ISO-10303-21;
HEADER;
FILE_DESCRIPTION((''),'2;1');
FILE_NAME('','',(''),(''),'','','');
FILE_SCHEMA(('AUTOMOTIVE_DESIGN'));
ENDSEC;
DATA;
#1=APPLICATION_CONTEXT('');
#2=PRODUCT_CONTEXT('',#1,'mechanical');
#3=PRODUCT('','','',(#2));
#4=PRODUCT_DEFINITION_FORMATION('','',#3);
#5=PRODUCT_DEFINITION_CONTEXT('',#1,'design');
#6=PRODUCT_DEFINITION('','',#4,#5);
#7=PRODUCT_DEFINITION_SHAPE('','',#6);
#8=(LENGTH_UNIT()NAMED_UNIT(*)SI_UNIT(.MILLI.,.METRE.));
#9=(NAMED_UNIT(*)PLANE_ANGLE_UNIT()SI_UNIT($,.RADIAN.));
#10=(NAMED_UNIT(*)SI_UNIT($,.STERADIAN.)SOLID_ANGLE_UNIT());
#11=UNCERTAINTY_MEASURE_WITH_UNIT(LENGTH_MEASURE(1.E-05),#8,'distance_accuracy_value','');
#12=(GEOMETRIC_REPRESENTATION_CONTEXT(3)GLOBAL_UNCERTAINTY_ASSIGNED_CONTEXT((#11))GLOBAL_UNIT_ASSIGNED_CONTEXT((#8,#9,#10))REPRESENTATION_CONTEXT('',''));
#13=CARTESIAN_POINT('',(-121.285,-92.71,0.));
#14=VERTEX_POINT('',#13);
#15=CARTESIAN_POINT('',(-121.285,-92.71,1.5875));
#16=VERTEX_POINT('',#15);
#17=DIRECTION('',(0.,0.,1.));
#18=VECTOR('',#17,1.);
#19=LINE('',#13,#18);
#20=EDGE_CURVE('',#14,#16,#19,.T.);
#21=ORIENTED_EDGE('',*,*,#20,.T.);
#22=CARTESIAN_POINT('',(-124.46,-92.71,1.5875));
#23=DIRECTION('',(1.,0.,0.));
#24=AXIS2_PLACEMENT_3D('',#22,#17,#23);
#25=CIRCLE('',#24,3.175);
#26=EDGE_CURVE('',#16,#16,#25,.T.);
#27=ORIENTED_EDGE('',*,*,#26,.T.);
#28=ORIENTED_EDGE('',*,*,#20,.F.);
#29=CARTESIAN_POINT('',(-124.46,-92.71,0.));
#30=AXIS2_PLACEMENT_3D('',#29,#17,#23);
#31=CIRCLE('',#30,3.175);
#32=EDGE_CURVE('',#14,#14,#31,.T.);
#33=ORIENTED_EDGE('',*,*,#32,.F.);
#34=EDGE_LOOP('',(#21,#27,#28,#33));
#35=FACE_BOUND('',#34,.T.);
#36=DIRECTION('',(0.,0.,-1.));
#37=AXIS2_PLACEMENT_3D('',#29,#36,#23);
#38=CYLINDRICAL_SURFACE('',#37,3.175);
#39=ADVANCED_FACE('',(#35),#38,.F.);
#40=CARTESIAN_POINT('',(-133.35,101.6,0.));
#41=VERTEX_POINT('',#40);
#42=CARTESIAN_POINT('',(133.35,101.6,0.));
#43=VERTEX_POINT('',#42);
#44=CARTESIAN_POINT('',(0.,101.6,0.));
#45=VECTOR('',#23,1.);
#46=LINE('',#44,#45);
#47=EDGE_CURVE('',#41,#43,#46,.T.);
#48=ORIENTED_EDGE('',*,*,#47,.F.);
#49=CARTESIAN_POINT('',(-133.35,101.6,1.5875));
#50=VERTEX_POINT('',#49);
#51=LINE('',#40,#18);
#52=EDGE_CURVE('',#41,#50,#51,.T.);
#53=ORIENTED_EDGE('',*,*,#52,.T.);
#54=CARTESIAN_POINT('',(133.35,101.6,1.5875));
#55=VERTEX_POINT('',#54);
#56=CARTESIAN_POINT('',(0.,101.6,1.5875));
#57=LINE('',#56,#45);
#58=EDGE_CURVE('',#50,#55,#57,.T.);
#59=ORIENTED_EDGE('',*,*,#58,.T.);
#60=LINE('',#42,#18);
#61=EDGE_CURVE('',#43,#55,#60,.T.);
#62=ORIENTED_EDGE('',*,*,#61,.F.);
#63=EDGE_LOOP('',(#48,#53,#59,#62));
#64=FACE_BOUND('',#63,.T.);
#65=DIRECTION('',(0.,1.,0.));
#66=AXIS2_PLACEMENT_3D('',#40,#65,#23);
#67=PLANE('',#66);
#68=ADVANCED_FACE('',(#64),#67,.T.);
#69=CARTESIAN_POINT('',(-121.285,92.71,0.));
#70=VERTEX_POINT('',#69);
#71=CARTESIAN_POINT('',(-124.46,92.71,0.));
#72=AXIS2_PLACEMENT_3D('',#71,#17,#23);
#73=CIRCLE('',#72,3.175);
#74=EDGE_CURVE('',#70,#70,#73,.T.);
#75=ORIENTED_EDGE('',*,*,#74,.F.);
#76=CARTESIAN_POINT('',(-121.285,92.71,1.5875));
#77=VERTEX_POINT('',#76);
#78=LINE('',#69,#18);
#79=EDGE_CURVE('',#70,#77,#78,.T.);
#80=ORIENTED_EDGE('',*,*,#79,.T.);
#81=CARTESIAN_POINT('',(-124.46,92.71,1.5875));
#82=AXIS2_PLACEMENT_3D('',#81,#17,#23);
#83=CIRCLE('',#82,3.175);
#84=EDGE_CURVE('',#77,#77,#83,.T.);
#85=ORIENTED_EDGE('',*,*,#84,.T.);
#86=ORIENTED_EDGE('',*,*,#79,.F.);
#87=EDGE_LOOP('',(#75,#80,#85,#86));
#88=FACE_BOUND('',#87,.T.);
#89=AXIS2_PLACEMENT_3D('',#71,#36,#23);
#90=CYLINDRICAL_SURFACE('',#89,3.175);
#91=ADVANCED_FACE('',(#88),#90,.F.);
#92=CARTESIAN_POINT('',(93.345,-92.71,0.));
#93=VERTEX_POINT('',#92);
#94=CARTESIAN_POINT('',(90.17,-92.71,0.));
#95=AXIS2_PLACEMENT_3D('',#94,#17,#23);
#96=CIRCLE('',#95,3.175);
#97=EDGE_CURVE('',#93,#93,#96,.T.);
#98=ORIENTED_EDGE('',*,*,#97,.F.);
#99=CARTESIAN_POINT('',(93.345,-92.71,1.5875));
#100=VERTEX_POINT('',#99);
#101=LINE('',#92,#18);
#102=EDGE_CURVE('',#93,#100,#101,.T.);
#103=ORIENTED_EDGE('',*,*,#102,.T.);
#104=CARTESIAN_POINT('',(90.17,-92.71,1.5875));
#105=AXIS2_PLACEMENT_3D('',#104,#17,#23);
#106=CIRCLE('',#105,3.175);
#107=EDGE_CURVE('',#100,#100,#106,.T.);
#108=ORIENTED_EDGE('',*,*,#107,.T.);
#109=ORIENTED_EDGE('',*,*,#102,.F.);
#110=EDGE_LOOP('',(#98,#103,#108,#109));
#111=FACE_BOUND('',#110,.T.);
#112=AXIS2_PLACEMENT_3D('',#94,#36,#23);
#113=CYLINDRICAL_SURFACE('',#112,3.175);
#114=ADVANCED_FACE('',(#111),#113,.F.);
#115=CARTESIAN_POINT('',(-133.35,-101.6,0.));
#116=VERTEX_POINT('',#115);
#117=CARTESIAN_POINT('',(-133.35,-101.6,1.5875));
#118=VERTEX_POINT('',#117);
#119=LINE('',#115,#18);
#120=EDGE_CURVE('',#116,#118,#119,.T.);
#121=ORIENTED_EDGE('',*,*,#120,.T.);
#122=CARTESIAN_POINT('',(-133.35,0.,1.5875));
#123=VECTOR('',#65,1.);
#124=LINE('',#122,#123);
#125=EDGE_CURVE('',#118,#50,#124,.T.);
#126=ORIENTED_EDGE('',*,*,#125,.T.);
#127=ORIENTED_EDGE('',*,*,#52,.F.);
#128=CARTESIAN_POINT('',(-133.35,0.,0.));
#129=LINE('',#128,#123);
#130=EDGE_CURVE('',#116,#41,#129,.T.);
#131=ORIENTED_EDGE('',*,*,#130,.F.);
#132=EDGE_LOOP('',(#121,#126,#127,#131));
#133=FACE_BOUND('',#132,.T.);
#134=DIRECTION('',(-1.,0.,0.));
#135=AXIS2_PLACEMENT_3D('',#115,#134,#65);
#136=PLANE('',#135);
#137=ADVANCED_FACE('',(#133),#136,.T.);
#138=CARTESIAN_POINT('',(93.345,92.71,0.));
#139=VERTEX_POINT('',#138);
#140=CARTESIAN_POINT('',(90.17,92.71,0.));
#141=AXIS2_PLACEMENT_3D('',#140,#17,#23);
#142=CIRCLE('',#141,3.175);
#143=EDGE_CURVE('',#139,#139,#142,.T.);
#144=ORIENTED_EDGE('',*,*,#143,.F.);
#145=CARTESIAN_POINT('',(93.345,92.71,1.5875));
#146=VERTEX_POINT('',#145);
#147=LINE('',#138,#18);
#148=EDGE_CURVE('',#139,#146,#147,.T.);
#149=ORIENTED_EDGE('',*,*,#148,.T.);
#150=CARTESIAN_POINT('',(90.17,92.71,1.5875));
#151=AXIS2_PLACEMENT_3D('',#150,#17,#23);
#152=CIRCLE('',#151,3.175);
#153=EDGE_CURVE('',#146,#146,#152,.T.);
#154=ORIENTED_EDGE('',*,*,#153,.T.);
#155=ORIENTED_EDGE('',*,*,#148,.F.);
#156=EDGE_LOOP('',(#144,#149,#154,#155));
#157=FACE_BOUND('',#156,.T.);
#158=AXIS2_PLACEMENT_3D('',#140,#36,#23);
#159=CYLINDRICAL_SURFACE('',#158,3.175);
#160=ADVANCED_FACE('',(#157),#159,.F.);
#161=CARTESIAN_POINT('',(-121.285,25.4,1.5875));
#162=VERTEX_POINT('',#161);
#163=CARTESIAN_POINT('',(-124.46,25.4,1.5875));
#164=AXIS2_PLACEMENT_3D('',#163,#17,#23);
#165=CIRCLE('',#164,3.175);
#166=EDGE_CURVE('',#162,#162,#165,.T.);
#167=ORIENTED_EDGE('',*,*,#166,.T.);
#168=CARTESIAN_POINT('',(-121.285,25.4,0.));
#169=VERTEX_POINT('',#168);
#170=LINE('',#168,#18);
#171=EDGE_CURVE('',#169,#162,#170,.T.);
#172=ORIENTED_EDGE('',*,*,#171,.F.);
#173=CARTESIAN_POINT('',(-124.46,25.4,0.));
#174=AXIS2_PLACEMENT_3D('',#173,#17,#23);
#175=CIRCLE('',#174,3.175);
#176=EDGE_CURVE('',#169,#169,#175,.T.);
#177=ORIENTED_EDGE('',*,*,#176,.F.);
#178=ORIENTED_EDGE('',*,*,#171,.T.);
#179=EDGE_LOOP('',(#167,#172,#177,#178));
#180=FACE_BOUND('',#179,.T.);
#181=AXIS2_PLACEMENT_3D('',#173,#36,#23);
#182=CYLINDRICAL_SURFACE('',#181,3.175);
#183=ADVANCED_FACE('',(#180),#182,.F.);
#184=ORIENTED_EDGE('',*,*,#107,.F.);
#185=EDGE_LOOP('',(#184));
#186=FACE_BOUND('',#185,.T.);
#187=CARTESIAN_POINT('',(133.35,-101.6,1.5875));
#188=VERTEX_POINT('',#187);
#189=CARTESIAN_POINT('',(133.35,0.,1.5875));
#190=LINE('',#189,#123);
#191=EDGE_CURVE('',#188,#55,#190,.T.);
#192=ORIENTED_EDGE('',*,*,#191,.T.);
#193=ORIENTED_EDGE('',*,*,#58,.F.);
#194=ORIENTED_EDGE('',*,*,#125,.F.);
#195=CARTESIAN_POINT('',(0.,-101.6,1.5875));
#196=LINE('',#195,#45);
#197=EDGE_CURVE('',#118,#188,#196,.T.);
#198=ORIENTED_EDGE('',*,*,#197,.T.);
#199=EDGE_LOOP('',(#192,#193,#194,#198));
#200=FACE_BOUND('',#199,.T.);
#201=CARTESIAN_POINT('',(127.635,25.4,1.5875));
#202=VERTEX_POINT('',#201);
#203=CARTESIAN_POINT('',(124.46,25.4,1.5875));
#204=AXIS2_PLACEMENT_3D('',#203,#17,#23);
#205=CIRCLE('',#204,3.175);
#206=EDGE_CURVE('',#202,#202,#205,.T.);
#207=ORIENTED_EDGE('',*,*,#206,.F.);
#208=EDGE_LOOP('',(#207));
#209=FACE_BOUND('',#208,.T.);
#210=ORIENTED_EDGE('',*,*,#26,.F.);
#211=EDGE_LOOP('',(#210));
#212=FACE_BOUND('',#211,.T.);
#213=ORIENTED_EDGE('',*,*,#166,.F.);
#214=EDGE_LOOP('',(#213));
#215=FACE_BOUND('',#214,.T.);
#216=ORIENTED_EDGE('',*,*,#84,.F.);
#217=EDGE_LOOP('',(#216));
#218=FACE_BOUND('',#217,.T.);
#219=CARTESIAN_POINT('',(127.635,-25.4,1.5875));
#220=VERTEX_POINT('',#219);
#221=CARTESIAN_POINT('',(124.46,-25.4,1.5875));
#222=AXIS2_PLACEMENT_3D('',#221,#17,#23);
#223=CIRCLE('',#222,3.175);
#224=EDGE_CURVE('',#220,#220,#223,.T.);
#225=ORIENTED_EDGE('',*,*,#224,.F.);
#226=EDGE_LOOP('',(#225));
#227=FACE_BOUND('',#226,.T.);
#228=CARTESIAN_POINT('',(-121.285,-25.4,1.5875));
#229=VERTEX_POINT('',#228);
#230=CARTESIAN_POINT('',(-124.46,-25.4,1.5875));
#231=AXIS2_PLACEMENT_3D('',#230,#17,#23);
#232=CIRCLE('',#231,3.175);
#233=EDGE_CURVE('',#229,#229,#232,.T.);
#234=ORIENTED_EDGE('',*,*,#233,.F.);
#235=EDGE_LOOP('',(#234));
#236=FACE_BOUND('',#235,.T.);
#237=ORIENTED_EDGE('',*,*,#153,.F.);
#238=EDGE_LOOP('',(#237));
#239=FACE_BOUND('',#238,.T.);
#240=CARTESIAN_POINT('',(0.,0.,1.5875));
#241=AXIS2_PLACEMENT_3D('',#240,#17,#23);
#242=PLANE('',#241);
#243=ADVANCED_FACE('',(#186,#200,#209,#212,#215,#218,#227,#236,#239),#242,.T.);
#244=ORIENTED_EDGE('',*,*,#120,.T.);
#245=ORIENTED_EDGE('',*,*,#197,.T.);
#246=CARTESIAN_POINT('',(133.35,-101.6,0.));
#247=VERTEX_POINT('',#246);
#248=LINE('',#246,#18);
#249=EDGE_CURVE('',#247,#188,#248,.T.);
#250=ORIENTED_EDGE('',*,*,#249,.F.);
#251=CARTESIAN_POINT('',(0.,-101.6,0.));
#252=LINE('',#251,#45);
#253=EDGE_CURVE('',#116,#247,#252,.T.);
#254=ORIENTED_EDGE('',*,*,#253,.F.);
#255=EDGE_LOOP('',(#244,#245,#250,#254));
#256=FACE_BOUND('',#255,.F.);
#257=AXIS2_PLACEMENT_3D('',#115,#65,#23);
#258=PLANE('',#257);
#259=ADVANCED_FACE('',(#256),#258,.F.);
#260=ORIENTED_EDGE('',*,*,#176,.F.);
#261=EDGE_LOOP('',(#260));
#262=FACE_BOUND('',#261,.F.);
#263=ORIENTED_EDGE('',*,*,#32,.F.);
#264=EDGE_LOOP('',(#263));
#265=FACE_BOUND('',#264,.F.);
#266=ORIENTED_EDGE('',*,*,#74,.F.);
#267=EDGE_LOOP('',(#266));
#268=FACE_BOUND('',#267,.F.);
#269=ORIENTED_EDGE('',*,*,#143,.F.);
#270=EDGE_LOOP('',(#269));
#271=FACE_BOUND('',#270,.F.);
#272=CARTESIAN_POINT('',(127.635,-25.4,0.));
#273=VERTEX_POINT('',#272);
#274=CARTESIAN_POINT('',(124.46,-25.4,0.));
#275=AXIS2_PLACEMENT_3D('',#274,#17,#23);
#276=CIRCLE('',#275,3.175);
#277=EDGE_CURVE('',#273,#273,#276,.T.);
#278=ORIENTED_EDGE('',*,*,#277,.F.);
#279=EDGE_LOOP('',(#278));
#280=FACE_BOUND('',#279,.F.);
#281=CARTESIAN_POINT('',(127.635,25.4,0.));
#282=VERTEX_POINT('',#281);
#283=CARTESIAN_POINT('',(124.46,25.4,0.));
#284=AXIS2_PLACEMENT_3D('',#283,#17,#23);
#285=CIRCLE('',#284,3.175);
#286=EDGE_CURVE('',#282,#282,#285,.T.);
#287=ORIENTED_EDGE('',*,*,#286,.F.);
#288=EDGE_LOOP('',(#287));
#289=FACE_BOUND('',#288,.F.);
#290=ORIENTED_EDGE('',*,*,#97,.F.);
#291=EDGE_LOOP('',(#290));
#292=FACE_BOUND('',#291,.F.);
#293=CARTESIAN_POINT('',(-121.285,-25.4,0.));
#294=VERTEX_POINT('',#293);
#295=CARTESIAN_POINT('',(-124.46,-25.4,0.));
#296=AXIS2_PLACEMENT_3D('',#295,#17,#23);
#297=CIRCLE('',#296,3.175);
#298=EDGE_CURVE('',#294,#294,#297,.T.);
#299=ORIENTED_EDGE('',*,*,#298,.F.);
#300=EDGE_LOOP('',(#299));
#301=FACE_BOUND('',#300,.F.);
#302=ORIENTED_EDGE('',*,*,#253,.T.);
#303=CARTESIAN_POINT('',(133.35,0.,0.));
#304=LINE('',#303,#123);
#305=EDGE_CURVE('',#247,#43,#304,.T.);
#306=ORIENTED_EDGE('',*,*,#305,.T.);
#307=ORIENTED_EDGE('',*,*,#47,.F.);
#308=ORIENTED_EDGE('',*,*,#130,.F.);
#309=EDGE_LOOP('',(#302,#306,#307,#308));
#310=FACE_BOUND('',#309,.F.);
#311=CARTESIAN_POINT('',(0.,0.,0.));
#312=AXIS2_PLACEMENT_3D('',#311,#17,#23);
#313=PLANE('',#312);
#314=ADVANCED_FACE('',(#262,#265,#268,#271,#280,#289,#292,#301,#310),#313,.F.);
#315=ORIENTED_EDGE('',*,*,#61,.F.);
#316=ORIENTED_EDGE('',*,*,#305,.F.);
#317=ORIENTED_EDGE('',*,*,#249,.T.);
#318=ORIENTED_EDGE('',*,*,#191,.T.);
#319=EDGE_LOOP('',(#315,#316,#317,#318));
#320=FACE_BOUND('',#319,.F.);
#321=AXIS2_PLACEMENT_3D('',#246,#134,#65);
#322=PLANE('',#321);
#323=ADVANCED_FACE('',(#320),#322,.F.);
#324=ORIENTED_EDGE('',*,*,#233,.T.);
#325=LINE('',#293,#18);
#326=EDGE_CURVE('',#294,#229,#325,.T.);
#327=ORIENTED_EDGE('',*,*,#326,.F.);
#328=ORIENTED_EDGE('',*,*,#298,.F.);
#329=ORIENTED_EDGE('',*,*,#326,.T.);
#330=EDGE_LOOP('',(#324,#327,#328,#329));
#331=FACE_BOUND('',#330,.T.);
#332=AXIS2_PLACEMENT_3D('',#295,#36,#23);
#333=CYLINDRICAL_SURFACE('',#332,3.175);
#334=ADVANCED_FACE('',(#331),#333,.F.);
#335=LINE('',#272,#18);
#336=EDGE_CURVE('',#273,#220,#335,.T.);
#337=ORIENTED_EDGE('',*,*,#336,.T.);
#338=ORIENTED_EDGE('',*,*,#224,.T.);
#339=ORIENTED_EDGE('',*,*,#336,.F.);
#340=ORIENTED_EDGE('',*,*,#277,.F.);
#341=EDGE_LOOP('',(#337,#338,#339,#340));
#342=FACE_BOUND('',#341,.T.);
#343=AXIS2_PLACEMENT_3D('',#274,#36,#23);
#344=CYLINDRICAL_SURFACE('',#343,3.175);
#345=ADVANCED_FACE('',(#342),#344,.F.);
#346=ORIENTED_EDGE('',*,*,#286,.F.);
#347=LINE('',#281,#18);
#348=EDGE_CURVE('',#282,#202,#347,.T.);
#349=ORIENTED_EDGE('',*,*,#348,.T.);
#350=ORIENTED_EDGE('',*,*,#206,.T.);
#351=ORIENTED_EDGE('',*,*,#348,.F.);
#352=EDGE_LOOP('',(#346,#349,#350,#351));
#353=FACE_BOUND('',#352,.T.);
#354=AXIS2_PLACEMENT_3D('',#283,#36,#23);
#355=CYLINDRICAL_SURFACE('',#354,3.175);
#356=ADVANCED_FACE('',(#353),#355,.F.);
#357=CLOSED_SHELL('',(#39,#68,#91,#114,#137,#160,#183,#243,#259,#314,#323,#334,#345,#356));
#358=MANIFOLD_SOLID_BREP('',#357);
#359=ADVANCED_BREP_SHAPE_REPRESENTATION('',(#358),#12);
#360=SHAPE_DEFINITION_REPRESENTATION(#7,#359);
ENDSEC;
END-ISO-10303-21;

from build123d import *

# Parameters (mm, degrees)
F0_W     = 266.7
F0_H     = 203.2
F0_R     = 3.175
F1_DEPTH = 1.5875


# Not quite as in the source:
# - a length typed as a fraction of an inch, garbled in the dataset ("3 / 203.2 mm" for 3/8 in), is restored


with BuildPart() as f1:
    # F0 (on Top) → F1 (new body)
    with BuildSketch(Plane.XY):
        Rectangle(F0_W, F0_H)
        with Locations((-124.46, -92.71)):
            Circle(F0_R, mode=Mode.SUBTRACT)
        with Locations((-124.46, -25.4)):
            Circle(F0_R, mode=Mode.SUBTRACT)
        with Locations((90.17, -92.71)):
            Circle(F0_R, mode=Mode.SUBTRACT)
        with Locations((124.46, -25.4)):
            Circle(F0_R, mode=Mode.SUBTRACT)
        with Locations((-124.46, 25.4)):
            Circle(F0_R, mode=Mode.SUBTRACT)
        with Locations((-124.46, 92.71)):
            Circle(F0_R, mode=Mode.SUBTRACT)
        with Locations((124.46, 25.4)):
            Circle(F0_R, mode=Mode.SUBTRACT)
        with Locations((90.17, 92.71)):
            Circle(F0_R, mode=Mode.SUBTRACT)
    extrude(amount=F1_DEPTH)


solid = f1.part
